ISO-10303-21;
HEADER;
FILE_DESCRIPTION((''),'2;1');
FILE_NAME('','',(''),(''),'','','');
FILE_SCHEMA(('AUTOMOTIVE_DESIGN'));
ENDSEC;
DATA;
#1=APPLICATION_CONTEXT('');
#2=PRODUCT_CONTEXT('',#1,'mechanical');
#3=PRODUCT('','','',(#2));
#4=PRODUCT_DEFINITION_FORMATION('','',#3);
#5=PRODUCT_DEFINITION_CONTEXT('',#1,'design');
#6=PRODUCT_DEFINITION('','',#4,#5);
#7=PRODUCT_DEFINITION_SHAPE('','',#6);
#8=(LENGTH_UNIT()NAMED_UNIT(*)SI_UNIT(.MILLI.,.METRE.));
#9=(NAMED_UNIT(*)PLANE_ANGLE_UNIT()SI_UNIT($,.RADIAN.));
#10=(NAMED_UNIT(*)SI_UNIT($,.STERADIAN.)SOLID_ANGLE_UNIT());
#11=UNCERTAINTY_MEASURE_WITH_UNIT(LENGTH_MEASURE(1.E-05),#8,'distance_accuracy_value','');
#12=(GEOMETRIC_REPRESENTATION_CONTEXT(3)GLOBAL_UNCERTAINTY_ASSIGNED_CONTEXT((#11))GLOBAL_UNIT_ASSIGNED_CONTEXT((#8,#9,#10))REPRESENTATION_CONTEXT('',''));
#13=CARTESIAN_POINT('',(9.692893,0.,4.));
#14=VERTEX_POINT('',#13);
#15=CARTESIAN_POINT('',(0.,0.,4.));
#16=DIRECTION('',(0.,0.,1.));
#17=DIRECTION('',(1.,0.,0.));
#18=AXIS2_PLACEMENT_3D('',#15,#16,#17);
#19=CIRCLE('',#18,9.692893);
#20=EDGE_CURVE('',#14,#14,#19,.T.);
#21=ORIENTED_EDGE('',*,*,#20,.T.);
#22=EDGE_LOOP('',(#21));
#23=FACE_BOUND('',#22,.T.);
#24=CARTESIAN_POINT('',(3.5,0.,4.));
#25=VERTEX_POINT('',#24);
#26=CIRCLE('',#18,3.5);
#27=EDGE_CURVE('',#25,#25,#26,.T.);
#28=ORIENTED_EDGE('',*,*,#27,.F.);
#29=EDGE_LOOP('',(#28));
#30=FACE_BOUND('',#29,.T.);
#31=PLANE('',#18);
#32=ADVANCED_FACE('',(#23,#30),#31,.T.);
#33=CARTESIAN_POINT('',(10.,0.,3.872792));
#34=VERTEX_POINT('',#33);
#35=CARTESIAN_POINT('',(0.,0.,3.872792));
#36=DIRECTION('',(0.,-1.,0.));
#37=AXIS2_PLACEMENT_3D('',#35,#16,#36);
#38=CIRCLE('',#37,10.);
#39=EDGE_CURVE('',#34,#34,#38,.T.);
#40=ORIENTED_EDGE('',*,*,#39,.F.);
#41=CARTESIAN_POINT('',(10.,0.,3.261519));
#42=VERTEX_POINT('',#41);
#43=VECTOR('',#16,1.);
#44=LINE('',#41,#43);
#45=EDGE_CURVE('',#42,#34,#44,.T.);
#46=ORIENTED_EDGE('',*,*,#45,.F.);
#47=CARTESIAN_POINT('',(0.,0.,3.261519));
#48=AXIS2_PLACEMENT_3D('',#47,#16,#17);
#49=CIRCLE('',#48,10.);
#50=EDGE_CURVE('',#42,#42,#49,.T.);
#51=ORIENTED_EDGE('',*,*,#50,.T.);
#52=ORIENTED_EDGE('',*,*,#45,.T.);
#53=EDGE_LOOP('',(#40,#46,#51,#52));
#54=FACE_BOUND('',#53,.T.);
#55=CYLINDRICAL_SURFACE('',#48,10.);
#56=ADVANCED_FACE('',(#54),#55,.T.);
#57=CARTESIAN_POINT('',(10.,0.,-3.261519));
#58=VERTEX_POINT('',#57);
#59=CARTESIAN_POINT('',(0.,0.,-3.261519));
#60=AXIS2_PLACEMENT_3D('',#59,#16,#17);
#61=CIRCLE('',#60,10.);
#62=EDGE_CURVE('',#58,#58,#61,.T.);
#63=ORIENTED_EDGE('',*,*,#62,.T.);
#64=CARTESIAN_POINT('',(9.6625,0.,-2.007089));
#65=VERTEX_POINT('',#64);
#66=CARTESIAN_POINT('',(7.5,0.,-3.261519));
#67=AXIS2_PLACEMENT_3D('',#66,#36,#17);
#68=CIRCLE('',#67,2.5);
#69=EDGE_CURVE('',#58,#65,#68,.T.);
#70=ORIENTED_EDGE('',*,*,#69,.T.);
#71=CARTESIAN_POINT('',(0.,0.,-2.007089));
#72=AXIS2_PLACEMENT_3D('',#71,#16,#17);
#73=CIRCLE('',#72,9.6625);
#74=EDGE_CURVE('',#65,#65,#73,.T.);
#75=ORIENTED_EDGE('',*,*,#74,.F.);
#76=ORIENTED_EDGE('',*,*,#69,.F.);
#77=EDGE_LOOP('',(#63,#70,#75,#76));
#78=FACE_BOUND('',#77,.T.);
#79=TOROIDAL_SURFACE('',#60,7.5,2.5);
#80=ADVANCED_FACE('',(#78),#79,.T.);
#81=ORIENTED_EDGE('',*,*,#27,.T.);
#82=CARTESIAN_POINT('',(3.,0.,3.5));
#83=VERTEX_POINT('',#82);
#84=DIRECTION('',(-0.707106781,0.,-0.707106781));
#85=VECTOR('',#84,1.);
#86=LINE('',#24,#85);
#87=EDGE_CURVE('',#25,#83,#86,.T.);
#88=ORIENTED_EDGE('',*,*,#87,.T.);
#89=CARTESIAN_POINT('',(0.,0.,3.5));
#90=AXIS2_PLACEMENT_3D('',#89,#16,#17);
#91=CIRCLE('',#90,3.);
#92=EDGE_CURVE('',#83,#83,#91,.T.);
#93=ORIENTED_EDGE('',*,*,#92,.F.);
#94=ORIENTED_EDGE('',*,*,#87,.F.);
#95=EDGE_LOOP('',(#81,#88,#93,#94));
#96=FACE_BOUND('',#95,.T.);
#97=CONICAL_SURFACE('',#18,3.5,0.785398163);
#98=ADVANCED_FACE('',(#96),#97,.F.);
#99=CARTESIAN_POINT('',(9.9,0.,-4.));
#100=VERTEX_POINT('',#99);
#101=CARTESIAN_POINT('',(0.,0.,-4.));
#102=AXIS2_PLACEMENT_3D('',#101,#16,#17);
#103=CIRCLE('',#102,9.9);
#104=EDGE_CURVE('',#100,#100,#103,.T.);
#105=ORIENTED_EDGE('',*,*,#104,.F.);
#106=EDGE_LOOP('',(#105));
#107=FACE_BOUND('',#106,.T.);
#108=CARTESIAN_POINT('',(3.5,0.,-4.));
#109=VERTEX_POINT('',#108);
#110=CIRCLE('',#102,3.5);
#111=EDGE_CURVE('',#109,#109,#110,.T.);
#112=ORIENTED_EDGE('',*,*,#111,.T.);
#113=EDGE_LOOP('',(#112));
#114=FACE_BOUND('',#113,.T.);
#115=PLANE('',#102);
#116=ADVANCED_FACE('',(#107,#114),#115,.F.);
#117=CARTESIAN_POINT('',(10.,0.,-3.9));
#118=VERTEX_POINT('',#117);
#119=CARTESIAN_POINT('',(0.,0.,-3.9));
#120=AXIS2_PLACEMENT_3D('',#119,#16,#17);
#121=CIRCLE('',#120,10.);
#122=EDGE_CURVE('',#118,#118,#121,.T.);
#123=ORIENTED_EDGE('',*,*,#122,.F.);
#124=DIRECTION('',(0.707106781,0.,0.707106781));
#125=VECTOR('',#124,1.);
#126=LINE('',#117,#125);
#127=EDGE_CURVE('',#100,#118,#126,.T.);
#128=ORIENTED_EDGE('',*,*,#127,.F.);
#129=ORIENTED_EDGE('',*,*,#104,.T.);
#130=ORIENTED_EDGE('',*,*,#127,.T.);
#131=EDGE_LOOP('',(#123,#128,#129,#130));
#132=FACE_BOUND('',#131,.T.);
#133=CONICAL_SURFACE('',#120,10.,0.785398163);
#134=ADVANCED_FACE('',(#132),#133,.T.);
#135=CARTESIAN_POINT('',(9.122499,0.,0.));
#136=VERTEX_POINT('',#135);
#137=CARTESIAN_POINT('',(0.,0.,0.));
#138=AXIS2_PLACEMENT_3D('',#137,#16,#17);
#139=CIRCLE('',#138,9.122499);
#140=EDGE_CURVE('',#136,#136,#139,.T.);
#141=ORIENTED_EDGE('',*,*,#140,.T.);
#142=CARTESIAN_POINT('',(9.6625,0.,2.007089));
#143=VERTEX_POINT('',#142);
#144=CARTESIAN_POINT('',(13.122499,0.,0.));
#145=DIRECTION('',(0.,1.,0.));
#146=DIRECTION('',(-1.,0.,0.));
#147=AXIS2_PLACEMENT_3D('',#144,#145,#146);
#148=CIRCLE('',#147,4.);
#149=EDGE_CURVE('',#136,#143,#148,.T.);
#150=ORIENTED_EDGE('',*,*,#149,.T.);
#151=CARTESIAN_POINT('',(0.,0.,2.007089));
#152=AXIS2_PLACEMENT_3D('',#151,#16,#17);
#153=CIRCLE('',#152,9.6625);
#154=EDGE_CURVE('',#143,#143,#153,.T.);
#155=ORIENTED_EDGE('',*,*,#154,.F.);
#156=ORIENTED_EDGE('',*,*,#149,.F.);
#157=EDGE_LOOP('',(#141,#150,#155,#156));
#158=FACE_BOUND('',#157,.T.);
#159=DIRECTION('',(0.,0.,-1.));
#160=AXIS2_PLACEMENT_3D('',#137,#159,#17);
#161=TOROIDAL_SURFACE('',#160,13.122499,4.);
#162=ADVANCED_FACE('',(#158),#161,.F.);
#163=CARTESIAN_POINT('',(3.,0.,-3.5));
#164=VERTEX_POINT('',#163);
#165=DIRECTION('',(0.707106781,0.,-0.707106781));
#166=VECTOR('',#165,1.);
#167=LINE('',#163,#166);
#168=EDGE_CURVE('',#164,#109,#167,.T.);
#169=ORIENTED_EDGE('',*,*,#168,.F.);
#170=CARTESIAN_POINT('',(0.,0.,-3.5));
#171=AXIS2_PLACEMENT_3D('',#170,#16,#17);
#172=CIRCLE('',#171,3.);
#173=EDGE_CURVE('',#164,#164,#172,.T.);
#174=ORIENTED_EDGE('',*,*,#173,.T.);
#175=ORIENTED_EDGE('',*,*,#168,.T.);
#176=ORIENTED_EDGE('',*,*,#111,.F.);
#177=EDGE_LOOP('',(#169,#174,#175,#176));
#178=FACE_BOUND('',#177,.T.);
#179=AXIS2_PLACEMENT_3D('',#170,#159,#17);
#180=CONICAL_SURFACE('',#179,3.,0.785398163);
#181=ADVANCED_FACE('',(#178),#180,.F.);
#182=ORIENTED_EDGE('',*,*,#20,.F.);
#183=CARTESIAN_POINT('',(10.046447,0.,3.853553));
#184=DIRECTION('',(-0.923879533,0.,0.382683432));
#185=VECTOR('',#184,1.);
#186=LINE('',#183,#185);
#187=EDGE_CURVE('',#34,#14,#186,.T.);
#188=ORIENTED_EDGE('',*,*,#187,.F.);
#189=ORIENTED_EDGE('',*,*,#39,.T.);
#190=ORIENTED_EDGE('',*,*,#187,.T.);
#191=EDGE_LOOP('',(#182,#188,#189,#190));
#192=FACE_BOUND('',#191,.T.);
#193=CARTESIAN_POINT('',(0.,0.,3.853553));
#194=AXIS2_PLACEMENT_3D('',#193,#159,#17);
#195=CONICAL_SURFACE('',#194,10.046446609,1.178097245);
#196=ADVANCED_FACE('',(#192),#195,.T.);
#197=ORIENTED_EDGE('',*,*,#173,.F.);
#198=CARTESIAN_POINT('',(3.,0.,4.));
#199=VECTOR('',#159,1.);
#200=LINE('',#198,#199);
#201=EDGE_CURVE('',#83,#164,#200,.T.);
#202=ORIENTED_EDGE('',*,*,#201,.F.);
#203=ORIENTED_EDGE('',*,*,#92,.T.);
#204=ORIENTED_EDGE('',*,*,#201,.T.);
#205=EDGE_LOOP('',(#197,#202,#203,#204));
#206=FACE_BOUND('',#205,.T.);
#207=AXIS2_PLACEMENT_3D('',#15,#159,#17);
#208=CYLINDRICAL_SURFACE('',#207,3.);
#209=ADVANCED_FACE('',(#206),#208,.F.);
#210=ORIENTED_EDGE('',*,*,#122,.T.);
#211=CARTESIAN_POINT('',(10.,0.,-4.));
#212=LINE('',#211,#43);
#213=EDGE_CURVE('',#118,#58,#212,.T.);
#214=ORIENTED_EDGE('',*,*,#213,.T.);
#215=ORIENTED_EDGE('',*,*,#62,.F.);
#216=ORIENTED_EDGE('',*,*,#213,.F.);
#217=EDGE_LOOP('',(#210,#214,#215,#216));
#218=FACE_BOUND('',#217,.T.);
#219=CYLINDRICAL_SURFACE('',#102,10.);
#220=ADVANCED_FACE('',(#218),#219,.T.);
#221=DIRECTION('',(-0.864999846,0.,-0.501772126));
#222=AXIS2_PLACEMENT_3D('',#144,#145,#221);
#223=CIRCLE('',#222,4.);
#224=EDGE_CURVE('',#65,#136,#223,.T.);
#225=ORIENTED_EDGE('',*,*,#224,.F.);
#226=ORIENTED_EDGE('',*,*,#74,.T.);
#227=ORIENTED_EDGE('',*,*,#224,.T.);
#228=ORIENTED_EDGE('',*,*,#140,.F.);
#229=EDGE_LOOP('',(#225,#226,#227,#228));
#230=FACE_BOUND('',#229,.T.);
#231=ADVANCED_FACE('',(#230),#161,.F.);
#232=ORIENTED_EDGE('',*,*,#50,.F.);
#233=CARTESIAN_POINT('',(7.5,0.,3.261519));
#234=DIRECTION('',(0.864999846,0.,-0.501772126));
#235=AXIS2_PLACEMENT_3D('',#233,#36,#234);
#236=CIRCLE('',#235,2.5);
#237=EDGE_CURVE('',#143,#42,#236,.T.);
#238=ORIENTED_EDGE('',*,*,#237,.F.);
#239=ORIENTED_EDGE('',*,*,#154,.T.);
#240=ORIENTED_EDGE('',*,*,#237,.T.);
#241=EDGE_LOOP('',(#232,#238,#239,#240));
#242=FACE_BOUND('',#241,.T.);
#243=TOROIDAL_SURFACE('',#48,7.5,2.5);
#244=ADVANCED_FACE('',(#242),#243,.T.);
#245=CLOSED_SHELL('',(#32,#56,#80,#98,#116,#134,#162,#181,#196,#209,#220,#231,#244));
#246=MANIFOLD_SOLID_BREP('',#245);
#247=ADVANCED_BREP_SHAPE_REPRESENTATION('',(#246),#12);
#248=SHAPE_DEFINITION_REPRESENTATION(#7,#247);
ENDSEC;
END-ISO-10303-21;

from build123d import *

# Parameters (mm, degrees)
F2_SIZE = 0.1


# Not quite as in the source:
# - a fillet or chamfer that OpenCascade refuses, or shapes differently, is made with other operations: its cross-section is extruded or revolved along the edge and cut away or added


with BuildPart() as f1:
    # F0 (on Front) → F1 (revolve)
    with BuildSketch(Plane.XZ):
        with BuildLine():
            Line((10, 4), (3, 4))
            Line((3, 4), (3, 0))
            Line((3, 0), (3, -4))
            Line((3, -4), (10, -4))
            Line((10, -4), (10, -3.2615188186))
            ThreePointArc((10, -3.2615188186), (9.9141508898, -2.6119993954), (9.6624996151, -2.0070885037))
            ThreePointArc((9.6624996151, -2.0070885037), (9.2598575755, -1.0392310772), (9.1224989992, 0))
            ThreePointArc((9.1224989992, 0), (9.2598575755, 1.0392310772), (9.6624996151, 2.0070885037))
            ThreePointArc((9.6624996151, 2.0070885037), (9.9141508898, 2.6119993954), (10, 3.2615188186))
            Line((10, 3.2615188186), (10, 4))
        make_face()
    revolve(axis=Axis((0, 0, 5.2388195913), (0, 0, 1)))

    # F2
    f2_edges = [f1.edges().sort_by_distance(p)[0] for p in [
        (-10, 0, 4),
        (-10, 0, -4),
    ]]
    chamfer(f2_edges, length=F2_SIZE)

    # F3: chamfer of 0.5 on 3 edges, made by hand

    # F3_s1 → F3_t2 (revolve, cut)
    with BuildSketch(Plane.XZ):
        Polygon((3.5, 4), (3, 3.5), (3, 4), align=None)
    revolve(axis=Axis((0, 0, 4), (0, 0, 1)), mode=Mode.SUBTRACT)

    # F3_s3 → F3_t4 (revolve, cut)
    with BuildSketch(Plane.XZ):
        Polygon((3, -3.5), (3.5, -4), (3, -4), align=None)
    revolve(axis=Axis((0, 0, -4), (0, 0, 1)), mode=Mode.SUBTRACT)

    # F3_s5 → F3_t6 (revolve, cut)
    with BuildSketch(Plane.XZ):
        Polygon((10.0464466094, 3.8535533906), (9.6928932188, 4), (9.9, 4), align=None)
    revolve(axis=Axis((0, 0, 4), (0, 0, 1)), mode=Mode.SUBTRACT)


solid = f1.part
